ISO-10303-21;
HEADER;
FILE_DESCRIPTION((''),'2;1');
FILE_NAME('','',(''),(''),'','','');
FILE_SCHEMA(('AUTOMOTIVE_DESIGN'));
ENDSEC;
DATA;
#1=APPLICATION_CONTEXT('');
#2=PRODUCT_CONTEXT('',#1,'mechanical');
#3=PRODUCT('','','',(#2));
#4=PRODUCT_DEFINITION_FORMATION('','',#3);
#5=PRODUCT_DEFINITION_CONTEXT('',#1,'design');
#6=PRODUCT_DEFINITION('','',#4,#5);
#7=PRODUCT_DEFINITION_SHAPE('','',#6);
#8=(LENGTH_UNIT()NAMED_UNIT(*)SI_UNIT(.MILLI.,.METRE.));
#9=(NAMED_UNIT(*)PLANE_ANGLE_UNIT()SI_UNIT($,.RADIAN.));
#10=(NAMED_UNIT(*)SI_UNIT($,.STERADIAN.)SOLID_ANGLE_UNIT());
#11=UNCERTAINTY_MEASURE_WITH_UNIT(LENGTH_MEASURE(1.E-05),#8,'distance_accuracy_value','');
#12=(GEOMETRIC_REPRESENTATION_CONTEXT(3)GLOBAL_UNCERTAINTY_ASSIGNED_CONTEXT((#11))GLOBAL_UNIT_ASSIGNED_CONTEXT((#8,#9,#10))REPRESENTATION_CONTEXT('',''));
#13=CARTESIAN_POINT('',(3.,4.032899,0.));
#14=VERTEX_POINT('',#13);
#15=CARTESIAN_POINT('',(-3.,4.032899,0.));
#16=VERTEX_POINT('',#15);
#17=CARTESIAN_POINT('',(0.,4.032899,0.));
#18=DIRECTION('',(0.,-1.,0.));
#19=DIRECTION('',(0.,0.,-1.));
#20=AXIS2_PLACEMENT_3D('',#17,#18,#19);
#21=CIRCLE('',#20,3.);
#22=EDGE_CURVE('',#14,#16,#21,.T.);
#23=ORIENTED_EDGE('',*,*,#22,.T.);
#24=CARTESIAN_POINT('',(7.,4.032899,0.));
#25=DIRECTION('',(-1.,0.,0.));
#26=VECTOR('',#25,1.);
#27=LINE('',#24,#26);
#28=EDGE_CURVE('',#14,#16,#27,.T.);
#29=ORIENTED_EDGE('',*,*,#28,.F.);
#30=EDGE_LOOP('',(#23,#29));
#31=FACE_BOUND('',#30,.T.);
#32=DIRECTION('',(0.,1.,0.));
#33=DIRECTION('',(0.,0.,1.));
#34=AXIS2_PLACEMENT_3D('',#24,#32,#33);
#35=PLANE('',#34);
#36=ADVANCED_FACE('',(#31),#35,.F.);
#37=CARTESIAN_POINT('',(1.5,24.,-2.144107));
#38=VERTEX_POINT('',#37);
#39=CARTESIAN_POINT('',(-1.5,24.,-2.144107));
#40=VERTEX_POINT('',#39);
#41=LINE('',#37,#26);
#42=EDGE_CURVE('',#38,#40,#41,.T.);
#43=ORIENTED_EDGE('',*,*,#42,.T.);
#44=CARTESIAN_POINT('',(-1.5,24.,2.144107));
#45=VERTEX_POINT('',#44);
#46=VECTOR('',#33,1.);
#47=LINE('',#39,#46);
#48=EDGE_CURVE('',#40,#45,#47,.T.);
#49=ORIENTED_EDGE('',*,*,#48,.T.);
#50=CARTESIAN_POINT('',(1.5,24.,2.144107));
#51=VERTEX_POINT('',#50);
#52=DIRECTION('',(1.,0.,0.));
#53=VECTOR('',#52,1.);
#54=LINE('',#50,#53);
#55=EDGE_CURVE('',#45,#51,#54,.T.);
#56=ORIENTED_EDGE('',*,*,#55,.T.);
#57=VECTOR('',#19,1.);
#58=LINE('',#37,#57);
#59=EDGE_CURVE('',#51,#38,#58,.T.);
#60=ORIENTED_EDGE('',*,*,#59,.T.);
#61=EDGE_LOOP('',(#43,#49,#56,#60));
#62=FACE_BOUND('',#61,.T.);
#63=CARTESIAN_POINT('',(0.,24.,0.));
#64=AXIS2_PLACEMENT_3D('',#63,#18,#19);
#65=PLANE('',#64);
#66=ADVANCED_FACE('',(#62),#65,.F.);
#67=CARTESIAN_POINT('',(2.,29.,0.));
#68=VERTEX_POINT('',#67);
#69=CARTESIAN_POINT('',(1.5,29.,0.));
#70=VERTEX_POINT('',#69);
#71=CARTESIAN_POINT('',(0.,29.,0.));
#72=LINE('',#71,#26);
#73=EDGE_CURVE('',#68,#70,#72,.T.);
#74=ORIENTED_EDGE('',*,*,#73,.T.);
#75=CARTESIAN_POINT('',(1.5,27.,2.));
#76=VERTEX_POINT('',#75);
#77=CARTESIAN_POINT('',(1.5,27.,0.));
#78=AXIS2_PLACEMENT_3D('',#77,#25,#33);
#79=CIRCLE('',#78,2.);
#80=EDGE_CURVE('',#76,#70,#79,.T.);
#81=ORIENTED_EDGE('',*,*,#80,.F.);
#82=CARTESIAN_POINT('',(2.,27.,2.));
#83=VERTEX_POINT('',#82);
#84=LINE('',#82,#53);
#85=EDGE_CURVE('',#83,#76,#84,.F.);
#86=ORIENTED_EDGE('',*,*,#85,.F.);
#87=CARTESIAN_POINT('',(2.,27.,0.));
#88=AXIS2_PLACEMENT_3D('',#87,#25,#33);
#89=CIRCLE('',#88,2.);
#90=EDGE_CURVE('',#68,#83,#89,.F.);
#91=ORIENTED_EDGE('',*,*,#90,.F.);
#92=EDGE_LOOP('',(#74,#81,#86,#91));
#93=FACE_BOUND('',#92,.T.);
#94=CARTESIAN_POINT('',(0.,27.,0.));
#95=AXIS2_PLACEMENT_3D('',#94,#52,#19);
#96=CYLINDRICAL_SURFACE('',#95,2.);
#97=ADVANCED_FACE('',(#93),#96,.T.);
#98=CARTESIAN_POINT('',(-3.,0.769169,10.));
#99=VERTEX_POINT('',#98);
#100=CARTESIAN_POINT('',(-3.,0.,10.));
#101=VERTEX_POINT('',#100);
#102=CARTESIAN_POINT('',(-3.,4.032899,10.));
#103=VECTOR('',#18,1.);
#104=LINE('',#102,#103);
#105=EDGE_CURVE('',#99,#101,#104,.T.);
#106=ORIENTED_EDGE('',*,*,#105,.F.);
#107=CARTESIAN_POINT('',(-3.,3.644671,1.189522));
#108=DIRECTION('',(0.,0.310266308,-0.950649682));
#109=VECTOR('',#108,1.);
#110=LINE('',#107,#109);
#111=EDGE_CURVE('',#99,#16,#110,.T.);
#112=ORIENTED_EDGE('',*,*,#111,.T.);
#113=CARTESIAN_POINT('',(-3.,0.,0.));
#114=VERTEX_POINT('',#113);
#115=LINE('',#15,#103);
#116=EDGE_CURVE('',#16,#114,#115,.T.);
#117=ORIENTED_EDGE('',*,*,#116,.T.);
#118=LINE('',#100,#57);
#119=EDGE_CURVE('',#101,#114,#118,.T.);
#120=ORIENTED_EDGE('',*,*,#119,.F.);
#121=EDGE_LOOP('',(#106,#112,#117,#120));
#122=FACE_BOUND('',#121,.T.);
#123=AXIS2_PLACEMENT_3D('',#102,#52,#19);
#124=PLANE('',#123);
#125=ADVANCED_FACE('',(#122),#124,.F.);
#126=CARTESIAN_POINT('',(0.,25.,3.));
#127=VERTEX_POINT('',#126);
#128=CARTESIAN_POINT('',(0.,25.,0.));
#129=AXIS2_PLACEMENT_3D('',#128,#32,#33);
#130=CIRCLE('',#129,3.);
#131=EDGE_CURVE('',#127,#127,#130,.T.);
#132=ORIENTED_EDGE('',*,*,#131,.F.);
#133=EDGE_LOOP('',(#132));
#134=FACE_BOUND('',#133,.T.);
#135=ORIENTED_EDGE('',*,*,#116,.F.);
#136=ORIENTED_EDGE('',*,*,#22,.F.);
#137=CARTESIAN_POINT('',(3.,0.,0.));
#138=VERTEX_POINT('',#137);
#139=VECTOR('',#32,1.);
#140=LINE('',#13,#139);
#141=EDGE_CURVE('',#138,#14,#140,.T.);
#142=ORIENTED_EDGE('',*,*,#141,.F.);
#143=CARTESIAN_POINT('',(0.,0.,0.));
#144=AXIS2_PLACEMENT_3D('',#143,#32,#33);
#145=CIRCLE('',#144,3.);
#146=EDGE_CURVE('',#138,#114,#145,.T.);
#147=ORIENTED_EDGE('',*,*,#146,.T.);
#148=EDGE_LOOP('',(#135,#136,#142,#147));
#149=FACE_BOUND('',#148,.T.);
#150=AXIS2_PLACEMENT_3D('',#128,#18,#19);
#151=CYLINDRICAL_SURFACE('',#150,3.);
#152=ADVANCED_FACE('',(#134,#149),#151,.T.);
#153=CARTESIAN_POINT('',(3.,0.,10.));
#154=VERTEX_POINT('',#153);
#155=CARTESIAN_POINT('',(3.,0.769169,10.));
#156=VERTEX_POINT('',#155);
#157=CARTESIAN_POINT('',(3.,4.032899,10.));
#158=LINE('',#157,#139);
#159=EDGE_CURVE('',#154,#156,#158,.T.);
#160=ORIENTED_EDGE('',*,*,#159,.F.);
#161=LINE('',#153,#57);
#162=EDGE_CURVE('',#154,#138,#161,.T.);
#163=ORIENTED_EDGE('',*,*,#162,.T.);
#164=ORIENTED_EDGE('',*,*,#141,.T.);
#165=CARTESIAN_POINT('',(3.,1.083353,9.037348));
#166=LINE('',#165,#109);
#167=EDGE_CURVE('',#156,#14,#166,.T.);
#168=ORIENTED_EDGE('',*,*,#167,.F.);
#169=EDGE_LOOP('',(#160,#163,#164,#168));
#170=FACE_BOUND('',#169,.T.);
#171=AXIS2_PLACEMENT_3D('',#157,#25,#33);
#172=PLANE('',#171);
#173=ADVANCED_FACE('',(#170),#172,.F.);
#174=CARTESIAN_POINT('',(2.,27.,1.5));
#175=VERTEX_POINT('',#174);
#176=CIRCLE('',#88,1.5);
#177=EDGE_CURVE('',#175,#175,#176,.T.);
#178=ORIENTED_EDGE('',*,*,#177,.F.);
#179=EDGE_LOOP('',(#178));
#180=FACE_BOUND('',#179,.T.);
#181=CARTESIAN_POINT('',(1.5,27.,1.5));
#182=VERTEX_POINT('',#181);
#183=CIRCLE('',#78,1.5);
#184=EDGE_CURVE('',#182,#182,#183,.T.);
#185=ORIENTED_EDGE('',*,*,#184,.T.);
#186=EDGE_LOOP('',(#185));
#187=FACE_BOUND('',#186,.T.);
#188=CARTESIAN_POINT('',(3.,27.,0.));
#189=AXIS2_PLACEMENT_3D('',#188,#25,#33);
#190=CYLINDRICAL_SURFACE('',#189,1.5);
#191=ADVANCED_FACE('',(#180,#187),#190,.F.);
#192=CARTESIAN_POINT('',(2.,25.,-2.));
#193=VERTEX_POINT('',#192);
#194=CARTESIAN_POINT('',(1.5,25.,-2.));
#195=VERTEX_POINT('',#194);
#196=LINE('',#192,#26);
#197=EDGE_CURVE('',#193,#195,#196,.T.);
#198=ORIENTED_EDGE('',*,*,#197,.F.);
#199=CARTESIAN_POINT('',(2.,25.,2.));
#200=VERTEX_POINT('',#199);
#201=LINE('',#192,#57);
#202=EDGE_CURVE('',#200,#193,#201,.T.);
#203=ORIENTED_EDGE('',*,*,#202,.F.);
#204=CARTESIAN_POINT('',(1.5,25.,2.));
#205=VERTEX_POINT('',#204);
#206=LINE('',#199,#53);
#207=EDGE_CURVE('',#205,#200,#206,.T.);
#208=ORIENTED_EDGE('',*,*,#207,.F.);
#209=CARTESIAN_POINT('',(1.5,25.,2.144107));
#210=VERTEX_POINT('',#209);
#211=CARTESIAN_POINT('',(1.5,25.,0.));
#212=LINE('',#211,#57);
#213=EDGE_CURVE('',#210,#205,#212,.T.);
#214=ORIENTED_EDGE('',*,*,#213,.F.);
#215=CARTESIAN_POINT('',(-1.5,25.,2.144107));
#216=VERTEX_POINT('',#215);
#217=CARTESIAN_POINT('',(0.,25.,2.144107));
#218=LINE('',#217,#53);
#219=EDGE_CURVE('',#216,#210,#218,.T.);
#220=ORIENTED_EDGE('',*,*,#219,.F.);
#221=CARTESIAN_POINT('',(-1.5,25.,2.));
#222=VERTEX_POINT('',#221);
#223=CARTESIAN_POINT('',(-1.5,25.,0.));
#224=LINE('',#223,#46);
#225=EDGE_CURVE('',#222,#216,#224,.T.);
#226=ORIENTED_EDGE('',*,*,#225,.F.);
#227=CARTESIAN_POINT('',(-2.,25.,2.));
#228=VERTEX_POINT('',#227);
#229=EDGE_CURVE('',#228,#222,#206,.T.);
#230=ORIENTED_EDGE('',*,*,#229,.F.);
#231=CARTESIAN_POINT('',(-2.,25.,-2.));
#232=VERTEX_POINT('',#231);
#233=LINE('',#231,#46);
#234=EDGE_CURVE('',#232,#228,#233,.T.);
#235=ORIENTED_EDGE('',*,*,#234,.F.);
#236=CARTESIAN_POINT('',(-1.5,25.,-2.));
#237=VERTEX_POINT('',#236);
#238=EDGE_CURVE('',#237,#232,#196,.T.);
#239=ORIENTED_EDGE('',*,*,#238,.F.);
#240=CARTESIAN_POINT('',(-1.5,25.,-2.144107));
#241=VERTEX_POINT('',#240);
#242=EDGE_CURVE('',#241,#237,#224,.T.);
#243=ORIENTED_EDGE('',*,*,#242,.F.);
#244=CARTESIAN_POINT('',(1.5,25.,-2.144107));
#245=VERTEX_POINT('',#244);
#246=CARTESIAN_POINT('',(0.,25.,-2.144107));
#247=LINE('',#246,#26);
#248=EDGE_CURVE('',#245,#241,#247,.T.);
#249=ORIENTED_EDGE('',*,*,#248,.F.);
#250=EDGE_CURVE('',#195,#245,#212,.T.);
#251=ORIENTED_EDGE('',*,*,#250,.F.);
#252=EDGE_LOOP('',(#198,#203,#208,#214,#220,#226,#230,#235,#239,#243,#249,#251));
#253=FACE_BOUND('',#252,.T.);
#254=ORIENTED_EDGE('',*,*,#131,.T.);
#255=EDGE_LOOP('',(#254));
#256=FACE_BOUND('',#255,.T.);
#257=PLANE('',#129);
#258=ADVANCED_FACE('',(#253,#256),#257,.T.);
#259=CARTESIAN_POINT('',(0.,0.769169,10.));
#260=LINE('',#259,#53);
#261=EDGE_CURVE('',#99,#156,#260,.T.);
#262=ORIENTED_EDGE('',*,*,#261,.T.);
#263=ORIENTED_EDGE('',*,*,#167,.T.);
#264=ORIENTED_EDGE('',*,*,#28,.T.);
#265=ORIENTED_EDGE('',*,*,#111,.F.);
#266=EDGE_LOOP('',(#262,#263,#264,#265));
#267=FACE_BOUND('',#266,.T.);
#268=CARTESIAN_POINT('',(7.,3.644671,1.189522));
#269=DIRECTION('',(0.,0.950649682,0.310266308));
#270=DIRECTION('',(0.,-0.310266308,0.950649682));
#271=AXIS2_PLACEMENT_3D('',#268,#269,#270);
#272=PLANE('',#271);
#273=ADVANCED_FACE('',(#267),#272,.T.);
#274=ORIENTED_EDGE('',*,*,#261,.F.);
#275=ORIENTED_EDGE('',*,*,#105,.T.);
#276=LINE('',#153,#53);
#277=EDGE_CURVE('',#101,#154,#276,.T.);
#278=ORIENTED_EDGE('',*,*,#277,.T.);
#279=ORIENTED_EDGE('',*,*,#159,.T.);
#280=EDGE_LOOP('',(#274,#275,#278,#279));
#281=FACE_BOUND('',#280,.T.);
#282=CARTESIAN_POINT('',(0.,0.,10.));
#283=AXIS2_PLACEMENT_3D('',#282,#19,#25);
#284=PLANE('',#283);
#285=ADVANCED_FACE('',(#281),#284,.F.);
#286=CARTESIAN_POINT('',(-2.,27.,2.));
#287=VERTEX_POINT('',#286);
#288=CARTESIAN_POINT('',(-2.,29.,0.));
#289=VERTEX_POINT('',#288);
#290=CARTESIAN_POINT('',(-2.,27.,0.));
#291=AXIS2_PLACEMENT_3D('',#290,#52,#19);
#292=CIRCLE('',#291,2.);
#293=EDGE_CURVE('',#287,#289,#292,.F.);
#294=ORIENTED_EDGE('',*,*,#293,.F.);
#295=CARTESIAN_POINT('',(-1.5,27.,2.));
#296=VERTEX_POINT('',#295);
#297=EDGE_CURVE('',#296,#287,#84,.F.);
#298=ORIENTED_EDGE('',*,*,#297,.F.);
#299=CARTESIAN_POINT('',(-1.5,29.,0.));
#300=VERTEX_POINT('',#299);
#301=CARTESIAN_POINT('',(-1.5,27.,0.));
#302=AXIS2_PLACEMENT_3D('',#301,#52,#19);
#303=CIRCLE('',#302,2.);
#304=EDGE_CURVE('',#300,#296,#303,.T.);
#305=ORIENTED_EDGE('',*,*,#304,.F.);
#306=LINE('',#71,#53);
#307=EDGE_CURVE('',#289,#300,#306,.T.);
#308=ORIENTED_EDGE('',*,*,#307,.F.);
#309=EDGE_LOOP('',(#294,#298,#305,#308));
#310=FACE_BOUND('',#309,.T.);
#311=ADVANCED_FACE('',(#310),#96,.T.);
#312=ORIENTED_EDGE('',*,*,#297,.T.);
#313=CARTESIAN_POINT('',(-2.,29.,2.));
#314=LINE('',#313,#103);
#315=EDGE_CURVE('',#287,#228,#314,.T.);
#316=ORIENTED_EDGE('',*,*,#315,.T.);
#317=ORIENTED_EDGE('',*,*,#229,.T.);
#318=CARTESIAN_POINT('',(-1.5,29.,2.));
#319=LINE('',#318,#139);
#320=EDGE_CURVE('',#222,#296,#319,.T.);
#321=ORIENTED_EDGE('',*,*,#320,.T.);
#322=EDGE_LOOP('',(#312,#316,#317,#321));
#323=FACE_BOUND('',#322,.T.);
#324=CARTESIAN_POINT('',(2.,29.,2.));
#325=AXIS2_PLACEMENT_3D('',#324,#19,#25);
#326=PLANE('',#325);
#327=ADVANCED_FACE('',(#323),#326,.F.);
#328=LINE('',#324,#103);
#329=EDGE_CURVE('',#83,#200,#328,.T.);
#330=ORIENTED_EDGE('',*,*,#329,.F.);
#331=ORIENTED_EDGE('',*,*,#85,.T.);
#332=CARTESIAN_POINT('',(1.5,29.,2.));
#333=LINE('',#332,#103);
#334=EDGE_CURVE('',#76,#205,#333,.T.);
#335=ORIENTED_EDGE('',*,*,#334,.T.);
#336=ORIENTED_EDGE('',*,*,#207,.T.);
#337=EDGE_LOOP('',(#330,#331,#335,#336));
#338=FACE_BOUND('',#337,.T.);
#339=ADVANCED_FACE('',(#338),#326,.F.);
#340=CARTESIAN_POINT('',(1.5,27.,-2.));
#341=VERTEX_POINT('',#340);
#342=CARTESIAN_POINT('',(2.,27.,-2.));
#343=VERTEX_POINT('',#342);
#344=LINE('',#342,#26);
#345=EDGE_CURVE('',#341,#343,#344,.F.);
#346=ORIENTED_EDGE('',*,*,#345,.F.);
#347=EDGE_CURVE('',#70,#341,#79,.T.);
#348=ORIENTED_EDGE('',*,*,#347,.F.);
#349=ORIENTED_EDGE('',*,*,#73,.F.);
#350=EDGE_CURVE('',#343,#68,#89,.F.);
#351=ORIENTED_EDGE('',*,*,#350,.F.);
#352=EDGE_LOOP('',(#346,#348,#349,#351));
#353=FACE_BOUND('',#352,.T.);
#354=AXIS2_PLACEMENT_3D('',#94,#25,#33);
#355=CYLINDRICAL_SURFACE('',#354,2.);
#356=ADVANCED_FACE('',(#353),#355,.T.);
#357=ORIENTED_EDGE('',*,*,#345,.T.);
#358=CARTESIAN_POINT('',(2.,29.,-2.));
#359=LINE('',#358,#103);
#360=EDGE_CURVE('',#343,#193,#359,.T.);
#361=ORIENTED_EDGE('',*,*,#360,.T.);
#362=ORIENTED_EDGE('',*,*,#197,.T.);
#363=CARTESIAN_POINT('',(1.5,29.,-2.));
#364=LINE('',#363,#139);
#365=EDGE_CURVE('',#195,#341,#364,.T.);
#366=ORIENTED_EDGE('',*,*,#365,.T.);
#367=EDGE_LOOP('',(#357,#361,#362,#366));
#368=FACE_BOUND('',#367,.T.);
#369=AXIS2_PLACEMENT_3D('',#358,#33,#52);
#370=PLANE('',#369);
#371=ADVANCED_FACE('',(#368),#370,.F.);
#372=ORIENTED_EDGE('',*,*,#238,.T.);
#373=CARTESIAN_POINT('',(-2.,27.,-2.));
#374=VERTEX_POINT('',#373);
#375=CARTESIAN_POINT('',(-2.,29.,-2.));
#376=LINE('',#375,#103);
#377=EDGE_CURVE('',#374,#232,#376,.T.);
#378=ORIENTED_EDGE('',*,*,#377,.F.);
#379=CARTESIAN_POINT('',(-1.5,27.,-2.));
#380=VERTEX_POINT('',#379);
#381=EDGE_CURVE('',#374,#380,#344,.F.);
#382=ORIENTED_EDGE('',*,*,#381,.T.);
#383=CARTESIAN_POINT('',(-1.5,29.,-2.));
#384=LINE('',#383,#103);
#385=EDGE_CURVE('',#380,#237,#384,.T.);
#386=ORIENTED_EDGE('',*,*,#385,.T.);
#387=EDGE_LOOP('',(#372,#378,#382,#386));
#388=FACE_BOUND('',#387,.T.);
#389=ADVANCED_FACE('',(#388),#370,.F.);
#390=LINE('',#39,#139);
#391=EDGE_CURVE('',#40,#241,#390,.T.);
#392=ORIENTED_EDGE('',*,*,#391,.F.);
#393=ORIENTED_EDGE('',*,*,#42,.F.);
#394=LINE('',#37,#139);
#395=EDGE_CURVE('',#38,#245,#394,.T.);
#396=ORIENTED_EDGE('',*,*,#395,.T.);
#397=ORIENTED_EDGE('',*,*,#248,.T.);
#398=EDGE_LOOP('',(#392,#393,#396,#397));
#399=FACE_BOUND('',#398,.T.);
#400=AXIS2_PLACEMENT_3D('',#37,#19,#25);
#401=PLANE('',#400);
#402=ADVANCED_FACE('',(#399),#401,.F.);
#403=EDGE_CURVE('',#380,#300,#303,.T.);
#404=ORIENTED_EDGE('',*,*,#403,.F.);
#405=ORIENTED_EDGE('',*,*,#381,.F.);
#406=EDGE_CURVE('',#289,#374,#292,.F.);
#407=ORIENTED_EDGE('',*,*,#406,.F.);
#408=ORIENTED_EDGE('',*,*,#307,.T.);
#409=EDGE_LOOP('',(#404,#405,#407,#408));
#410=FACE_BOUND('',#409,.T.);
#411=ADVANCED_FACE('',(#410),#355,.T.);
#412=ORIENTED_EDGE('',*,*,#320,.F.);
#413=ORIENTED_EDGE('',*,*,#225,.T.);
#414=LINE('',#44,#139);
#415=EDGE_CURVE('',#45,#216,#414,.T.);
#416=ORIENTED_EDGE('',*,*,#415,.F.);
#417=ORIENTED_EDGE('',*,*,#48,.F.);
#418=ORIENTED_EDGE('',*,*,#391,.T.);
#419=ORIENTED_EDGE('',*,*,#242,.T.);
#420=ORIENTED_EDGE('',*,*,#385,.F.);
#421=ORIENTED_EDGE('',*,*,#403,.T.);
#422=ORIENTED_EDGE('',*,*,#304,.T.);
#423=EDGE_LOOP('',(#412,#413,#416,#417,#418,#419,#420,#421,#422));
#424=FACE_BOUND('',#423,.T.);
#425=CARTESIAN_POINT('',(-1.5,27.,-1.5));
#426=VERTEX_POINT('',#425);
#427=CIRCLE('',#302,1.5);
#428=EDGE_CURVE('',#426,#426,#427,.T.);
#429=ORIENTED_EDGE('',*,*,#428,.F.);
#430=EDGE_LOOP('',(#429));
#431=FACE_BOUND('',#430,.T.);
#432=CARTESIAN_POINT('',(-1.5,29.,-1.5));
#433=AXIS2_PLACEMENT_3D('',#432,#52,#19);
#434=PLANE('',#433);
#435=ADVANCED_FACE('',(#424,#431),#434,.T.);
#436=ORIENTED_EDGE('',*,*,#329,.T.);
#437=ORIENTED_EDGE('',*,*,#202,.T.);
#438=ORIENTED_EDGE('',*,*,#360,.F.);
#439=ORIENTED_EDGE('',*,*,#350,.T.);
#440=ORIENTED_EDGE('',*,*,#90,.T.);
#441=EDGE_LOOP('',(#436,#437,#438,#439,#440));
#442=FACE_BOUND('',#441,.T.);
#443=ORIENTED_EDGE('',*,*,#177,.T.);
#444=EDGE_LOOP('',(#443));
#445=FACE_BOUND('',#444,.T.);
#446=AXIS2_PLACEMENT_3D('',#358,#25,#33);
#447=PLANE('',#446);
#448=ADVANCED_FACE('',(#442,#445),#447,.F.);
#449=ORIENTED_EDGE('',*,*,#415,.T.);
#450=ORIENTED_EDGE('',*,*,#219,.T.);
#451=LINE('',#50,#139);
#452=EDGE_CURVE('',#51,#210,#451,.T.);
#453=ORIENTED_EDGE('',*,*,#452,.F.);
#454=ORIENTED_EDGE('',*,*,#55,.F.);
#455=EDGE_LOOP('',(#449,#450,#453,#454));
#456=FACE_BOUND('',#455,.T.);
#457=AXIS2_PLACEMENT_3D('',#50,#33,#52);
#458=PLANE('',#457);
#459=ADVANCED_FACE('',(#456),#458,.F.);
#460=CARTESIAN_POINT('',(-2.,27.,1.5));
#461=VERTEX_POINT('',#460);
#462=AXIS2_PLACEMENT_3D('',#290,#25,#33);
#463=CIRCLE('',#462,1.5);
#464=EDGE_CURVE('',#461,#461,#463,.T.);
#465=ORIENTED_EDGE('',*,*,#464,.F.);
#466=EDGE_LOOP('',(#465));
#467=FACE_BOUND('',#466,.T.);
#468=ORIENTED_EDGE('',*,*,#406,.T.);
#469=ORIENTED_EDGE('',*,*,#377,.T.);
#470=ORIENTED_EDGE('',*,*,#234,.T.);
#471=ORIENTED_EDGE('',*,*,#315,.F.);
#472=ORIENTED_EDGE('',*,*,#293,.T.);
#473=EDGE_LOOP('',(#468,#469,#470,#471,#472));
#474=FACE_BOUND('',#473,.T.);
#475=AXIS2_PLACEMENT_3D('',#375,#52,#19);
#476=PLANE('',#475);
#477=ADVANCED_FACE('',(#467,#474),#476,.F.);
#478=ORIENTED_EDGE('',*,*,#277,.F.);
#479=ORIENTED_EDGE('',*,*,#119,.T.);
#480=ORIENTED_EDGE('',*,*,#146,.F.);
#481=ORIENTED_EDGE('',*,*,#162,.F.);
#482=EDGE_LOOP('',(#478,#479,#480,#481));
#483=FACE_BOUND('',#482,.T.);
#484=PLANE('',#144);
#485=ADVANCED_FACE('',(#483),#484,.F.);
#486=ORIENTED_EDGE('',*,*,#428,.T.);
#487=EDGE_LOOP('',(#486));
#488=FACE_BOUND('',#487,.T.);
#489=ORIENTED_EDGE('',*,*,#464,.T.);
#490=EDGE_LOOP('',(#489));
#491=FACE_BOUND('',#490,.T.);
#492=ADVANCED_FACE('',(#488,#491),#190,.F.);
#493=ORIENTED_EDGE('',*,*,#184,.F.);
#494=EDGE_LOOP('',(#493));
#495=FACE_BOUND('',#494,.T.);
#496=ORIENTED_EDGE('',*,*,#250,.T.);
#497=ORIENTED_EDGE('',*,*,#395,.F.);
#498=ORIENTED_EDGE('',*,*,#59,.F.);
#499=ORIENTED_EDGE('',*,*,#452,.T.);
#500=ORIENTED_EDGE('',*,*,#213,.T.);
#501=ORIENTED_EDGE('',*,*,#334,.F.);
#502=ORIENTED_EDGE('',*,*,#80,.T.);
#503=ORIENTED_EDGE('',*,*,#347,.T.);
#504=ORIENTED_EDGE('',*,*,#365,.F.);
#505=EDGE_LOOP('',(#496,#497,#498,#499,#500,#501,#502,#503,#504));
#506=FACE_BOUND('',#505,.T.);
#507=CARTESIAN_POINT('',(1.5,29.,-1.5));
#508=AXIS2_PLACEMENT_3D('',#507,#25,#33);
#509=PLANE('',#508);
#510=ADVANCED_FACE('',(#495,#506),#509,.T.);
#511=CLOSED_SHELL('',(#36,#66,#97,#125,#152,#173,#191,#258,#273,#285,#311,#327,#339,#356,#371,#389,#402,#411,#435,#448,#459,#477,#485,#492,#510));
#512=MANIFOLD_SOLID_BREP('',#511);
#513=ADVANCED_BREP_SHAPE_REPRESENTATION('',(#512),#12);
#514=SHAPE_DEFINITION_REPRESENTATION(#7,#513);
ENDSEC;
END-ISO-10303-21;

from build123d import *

# Parameters (mm, degrees)
SKETCH1_R           = 3
BOSS_EXTRUDE1_DEPTH = 25
SKETCH2_W           = 4
SKETCH2_H           = 4
SKETCH2_W_2         = 3
SKETCH2_H_2         = 3
BOSS_EXTRUDE2_DEPTH = 4
SKETCH3_W           = 3
SKETCH3_H           = 4.288213466
CUT_EXTRUDE1_DEPTH  = 5
SKETCH4_R           = 1.5
CUT_EXTRUDE2_DEPTH  = 5
FILLET1_R           = 2
SKETCH5_W           = 6
SKETCH5_H           = 4.032898641
BOSS_EXTRUDE3_DEPTH = 10
CUT_EXTRUDE4_DEPTH  = 10


with BuildPart() as part:
    # Sketch1 → Boss-Extrude1 (new body)
    with BuildSketch(Plane(origin=(0, 0, 0), x_dir=(1, 0, 0), z_dir=(0, 1, 0))):
        with Locations(Location((0, 0, 0), (0, 0, 270))):
            Circle(SKETCH1_R)
    extrude(amount=BOSS_EXTRUDE1_DEPTH)

    # Sketch2 → Boss-Extrude2 (add)
    with BuildSketch(Plane(origin=(0, 25, 0), x_dir=(1, 0, 0), z_dir=(0, 1, 0))):
        Rectangle(SKETCH2_W, SKETCH2_H)
        Rectangle(SKETCH2_W_2, SKETCH2_H_2, mode=Mode.SUBTRACT)
    extrude(amount=BOSS_EXTRUDE2_DEPTH)

    # Sketch3 → Cut-Extrude1 (cut)
    with BuildSketch(Plane(origin=(0, 29, 0), x_dir=(1, 0, 0), z_dir=(0, 1, 0))):
        Rectangle(SKETCH3_W, SKETCH3_H)
    extrude(amount=-CUT_EXTRUDE1_DEPTH, mode=Mode.SUBTRACT)

    # Sketch4 → Cut-Extrude2 (cut)
    with BuildSketch(Plane.ZY.offset(2)):
        with Locations((0, 27)):
            Circle(SKETCH4_R)
    extrude(amount=-CUT_EXTRUDE2_DEPTH, mode=Mode.SUBTRACT)

    # Fillet1
    fillet1_edges = [part.edges().sort_by_distance(p)[0] for p in [
        (1.75, 29, 2),
        (1.75, 29, -2),
        (-1.75, 29, -2),
        (-1.75, 29, 2),
    ]]
    fillet(fillet1_edges, radius=FILLET1_R - 0.0001)  # a hair under: the kernel refuses the full size

    # Sketch5 → Boss-Extrude3 (add)
    with BuildSketch(Plane.XY):
        with Locations((0, 2.016449321)):
            Rectangle(SKETCH5_W, SKETCH5_H)
    extrude(amount=BOSS_EXTRUDE3_DEPTH)

    # Sketch6 → Cut-Extrude4 (cut)
    with BuildSketch(Plane.ZY.offset(3)):
        Polygon((0, 4.032898641), (10, 0.769169486), (10, 4.032898641), align=None)
    extrude(amount=-CUT_EXTRUDE4_DEPTH, mode=Mode.SUBTRACT)


solid = part.part
